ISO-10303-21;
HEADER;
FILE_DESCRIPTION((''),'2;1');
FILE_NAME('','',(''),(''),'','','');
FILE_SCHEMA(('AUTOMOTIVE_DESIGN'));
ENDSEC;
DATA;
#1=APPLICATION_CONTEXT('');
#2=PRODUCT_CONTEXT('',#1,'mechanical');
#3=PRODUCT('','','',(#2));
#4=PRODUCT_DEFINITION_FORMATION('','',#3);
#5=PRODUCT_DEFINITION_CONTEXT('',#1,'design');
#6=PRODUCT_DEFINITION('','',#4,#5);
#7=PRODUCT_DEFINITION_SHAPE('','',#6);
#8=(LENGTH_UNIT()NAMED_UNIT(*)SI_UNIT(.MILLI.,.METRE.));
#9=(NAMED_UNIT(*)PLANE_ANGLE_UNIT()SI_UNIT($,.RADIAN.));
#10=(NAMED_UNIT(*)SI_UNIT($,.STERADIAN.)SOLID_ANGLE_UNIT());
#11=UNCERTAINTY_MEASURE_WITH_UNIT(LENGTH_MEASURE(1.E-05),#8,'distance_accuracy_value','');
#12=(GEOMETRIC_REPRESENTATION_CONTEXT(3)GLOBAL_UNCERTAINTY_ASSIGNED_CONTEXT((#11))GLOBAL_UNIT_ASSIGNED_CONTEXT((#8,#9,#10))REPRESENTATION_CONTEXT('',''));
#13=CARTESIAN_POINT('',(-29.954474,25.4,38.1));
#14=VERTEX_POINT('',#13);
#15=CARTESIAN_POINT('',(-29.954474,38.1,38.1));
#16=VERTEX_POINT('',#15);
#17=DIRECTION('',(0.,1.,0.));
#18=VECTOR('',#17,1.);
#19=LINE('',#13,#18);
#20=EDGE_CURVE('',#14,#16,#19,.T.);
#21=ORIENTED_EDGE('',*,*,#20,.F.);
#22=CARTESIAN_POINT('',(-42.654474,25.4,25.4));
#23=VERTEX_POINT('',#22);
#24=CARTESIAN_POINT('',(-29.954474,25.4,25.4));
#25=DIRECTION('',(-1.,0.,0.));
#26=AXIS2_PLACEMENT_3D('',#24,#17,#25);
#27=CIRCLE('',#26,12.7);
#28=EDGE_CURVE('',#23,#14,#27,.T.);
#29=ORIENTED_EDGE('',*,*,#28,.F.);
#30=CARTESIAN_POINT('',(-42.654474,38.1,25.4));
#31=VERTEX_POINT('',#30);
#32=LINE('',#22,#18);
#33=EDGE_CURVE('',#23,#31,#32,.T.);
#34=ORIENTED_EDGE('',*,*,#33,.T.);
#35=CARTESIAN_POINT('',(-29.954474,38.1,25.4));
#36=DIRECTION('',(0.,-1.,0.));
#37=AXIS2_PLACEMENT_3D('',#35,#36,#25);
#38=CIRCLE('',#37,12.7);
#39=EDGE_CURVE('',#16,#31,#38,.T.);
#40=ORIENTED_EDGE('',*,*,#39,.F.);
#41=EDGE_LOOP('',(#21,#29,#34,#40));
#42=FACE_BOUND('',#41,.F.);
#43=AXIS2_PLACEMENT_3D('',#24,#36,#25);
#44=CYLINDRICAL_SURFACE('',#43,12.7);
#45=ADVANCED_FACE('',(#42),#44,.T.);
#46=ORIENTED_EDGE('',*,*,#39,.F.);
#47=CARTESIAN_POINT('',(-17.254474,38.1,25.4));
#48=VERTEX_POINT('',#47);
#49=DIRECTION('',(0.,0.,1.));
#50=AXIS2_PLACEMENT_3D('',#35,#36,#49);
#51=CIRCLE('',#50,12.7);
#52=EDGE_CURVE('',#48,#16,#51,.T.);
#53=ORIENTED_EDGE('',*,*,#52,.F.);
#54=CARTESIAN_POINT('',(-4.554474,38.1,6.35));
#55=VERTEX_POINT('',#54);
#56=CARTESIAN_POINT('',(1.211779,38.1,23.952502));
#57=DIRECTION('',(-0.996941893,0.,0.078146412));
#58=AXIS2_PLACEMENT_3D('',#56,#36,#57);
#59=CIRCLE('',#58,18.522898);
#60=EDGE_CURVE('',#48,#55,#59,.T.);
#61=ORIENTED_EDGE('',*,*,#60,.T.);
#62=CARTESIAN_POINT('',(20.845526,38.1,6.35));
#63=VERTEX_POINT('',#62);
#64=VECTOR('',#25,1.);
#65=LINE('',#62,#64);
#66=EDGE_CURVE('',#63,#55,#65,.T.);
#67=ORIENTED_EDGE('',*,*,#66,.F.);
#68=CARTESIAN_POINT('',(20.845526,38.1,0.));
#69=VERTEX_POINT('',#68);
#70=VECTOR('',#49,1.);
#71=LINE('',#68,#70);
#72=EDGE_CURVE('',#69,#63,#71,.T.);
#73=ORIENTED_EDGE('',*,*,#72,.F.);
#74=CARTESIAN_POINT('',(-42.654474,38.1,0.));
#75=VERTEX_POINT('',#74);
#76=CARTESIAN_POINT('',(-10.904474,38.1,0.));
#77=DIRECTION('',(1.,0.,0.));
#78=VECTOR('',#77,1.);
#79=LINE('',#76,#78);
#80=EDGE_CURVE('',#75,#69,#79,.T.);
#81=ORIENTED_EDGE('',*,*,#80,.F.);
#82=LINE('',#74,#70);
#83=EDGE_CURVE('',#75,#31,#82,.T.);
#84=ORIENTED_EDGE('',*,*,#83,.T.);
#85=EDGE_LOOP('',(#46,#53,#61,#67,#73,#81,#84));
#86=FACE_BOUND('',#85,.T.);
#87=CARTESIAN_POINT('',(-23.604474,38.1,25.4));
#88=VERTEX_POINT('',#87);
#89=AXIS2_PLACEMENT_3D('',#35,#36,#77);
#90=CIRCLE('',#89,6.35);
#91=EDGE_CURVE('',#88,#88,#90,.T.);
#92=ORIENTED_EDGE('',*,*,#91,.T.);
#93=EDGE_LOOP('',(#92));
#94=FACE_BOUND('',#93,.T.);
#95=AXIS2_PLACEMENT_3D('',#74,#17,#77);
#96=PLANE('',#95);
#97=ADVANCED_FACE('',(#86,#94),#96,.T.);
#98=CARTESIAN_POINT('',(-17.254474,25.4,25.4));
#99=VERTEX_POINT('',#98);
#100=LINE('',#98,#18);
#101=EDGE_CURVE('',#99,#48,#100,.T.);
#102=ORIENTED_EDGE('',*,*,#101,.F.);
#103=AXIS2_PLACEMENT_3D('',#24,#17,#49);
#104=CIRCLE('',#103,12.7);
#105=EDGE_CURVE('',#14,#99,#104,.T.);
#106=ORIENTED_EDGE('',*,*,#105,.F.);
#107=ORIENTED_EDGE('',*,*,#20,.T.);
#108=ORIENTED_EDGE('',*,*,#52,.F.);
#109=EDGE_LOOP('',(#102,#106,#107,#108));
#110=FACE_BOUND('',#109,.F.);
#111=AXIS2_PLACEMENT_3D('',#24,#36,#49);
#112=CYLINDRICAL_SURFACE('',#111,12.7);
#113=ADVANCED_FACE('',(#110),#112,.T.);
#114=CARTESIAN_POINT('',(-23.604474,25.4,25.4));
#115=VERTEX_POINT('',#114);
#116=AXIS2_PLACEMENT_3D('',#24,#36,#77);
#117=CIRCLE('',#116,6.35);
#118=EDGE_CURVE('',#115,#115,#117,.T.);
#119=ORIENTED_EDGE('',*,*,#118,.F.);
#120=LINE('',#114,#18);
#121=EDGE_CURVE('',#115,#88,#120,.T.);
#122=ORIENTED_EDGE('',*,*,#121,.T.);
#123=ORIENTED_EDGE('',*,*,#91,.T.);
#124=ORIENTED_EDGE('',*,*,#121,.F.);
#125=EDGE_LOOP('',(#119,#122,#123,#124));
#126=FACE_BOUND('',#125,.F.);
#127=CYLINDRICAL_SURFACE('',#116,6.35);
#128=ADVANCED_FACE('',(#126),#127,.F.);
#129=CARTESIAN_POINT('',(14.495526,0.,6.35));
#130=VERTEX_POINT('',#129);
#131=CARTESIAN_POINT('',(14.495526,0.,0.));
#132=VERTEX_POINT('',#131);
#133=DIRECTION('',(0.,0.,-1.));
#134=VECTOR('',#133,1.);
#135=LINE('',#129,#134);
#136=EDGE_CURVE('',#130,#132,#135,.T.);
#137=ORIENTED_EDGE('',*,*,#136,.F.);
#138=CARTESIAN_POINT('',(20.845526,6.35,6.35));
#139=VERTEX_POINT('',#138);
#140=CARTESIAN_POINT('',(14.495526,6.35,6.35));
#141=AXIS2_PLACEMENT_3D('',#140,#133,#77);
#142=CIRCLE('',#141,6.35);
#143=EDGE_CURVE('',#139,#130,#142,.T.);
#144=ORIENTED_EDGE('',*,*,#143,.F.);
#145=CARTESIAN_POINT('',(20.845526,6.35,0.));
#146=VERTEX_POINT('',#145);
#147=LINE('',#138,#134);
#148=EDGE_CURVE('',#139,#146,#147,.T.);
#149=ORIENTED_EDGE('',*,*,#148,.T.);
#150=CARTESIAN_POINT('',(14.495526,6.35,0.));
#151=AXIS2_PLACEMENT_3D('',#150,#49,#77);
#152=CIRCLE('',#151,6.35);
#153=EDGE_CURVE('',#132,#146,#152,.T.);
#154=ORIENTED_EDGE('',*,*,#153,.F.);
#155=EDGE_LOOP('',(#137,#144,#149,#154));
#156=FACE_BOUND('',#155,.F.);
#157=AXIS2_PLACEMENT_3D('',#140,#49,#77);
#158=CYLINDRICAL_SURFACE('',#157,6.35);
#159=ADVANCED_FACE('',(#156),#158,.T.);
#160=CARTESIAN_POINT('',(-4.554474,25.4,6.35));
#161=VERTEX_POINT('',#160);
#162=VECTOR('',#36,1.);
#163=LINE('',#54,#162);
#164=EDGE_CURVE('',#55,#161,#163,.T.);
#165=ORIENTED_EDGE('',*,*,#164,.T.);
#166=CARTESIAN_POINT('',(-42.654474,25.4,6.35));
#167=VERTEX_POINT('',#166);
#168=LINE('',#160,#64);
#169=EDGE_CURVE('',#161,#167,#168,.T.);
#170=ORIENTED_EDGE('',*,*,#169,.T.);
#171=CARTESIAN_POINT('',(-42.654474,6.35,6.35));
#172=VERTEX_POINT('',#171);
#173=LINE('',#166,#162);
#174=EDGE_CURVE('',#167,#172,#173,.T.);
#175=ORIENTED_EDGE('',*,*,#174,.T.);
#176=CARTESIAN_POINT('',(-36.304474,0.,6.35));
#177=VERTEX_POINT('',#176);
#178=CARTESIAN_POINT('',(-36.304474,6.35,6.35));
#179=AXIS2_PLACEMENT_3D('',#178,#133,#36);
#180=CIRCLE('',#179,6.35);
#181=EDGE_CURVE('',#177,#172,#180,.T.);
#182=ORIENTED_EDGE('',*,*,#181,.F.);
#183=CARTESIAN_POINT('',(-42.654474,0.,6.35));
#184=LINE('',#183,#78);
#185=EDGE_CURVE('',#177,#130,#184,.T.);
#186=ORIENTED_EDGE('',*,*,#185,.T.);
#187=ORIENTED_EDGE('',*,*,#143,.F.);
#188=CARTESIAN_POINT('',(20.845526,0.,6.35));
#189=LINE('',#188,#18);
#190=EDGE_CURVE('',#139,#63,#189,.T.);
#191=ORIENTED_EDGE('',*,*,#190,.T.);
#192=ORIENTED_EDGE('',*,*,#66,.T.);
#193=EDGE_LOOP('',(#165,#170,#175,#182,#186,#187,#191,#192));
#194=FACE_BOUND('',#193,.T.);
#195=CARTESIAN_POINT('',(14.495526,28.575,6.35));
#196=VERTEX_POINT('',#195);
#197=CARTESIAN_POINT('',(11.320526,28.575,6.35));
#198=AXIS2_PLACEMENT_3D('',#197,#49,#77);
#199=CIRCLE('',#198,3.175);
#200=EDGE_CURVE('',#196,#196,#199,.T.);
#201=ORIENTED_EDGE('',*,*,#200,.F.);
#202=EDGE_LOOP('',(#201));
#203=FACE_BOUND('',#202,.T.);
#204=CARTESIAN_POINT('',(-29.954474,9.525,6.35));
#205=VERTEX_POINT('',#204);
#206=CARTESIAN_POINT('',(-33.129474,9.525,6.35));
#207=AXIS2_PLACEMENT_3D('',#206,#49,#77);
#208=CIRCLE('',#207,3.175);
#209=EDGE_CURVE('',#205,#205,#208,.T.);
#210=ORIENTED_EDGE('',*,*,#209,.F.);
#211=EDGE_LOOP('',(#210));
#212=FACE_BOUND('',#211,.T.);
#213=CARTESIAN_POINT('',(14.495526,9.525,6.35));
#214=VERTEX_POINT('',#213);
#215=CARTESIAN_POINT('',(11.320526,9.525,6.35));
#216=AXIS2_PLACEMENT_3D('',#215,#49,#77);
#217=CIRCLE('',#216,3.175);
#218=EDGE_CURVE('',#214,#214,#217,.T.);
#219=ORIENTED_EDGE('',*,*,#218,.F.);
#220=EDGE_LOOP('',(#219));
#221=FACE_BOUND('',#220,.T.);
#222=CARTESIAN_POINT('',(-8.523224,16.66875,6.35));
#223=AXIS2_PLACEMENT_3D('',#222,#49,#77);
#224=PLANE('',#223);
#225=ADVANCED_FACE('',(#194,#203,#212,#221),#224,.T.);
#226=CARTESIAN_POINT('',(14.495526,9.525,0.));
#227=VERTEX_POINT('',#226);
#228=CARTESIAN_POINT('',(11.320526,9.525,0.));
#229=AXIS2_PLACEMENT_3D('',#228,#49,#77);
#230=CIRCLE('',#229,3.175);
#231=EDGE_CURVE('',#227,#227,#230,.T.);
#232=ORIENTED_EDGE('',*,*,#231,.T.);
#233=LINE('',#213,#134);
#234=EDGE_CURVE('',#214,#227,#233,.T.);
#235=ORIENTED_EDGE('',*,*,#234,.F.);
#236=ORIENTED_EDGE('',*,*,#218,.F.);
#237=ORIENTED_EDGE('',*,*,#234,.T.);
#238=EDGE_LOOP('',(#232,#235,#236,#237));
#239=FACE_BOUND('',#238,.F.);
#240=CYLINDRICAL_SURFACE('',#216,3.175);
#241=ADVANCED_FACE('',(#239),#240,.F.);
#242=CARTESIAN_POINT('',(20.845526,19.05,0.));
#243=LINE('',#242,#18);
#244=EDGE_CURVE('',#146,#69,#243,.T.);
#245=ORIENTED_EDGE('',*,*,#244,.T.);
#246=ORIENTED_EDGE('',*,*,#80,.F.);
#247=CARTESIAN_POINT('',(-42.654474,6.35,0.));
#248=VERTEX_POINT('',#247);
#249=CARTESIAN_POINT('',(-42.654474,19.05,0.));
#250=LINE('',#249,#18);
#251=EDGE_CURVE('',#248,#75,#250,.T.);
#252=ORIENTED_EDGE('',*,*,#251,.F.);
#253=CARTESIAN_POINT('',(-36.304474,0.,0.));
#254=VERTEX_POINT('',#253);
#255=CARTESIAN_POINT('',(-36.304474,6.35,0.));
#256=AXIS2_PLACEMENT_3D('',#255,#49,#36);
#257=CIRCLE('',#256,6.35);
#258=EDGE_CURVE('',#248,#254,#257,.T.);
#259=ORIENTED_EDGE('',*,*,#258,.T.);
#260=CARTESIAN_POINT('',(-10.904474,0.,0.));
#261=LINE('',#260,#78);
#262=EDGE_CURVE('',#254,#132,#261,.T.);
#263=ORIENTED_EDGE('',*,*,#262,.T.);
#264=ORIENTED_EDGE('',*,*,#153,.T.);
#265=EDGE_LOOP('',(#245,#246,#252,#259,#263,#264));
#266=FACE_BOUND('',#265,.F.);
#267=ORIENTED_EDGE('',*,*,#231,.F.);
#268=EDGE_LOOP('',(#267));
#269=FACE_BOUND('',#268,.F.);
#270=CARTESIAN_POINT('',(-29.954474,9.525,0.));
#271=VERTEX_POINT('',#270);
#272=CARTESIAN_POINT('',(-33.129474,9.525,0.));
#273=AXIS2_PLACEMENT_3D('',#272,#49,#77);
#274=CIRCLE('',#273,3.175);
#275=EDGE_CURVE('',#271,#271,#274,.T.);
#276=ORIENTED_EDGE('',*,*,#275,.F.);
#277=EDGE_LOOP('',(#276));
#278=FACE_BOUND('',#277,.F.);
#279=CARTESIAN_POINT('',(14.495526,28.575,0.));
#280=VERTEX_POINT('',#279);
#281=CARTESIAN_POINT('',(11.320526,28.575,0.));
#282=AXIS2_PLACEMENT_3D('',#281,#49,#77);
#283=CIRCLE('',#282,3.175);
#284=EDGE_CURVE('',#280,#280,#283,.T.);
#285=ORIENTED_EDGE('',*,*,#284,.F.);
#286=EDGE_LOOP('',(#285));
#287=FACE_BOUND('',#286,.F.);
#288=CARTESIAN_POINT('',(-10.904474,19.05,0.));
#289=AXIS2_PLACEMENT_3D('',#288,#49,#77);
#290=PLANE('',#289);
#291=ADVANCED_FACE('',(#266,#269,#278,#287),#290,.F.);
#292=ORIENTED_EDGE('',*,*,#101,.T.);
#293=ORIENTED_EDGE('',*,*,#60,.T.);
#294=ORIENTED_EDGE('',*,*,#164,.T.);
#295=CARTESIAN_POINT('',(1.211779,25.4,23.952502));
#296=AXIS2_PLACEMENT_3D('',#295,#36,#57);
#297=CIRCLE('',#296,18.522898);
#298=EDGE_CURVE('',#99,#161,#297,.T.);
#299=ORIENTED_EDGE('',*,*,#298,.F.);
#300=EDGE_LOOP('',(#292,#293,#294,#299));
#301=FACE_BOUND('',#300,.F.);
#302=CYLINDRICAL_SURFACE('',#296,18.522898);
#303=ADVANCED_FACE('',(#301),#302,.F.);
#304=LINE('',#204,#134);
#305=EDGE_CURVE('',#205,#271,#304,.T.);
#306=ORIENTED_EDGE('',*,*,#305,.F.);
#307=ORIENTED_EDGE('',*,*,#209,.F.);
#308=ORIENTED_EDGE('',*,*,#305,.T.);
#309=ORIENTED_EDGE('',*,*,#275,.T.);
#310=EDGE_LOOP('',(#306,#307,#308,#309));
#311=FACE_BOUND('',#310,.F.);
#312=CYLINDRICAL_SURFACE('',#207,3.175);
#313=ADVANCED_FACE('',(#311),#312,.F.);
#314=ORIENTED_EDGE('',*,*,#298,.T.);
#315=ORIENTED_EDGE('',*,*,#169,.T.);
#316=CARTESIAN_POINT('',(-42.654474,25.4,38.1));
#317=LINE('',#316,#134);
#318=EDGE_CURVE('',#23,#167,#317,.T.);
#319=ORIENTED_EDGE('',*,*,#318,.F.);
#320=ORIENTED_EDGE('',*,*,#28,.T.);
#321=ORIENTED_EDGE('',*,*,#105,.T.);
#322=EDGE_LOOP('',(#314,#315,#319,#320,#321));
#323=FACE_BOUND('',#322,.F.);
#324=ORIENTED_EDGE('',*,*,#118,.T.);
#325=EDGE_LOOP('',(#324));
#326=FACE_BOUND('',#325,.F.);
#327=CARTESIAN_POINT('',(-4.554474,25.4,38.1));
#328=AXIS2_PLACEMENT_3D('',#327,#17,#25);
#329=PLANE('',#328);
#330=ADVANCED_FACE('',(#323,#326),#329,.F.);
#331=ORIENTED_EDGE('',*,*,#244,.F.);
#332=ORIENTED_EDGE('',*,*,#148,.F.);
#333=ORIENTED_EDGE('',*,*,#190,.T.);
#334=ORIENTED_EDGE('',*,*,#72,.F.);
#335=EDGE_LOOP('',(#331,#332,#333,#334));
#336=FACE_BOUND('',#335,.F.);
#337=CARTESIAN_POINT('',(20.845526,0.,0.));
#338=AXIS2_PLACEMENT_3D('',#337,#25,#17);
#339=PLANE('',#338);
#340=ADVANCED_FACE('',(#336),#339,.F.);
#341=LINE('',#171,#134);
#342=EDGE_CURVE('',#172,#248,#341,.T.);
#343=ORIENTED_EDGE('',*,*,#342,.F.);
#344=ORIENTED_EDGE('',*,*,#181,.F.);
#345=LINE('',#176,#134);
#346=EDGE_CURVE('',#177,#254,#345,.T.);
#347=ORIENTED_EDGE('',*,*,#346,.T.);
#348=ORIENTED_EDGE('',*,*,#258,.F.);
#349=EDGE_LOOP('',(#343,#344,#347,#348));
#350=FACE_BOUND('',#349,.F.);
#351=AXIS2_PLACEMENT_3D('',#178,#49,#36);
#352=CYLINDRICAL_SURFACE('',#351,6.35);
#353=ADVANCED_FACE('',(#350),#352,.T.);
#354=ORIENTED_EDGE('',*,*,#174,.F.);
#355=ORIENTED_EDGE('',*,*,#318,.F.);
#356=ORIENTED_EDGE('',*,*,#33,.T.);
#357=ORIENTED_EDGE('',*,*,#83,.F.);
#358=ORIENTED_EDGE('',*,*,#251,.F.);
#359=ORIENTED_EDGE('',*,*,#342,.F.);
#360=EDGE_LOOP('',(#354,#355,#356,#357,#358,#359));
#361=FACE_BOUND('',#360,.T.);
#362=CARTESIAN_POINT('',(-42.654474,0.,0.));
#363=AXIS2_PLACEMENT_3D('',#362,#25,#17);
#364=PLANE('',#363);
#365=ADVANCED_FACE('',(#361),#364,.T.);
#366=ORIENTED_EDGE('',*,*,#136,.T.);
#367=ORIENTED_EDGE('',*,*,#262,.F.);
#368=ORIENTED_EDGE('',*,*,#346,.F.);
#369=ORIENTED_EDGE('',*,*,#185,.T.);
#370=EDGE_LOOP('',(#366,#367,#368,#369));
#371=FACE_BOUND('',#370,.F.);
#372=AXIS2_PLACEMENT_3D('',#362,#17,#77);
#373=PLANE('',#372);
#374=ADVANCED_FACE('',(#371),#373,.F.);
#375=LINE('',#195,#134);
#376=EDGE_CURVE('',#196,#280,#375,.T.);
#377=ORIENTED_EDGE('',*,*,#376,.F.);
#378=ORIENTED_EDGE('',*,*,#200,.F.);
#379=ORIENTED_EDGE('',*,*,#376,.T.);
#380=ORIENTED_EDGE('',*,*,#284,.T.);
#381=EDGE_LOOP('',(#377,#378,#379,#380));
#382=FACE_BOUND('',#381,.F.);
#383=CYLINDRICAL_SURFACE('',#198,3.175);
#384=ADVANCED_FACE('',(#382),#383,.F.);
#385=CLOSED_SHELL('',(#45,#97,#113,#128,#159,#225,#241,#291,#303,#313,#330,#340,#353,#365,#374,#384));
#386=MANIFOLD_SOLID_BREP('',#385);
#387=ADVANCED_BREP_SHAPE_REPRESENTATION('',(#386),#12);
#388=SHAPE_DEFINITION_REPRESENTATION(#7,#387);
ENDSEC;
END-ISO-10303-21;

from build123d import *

# Parameters (mm, degrees)
F0_W      = 63.5
F0_H      = 38.1
F1_DEPTH  = 38.1
F3_DEPTH  = 31.75
F4_R      = 6.35
F5_DEPTH  = 44.45
F6_R      = 3.175
F7_DEPTH  = 25.4
F9_DEPTH  = 25.4
F11_DEPTH = 25.4


# Not quite as in the source:
# - a length typed as a fraction of an inch, garbled in the dataset ("3 / 203.2 mm" for 3/8 in), is restored


with BuildPart() as f1:
    # F0 (on Top) → F1 (new body)
    with BuildSketch(Plane.XY):
        with Locations((-10.9044740348, 19.05)):
            Rectangle(F0_W, F0_H)
    extrude(amount=F1_DEPTH)

    # F2 (on face) → F3 (cut)
    with BuildSketch(Plane.XY.offset(38.1)):
        Polygon((-4.5544740348, 25.4), (-42.6544740348, 25.4), (-42.6544740348, 0), (20.8455259652, 0), (20.8455259652, 38.1), (-4.5544740348, 38.1), align=None)
    extrude(amount=-F3_DEPTH, mode=Mode.SUBTRACT)

    # F4 (on face) → F5 (cut)
    with BuildSketch(Plane.XZ.offset(-25.4)):
        with Locations((-29.9544740348, 25.4)):
            Circle(F4_R)
        with BuildLine():
            ThreePointArc((-42.6544740348, 25.4), (-38.9347301559, 34.3802561211), (-29.9544740348, 38.1))
            Line((-29.9544740348, 38.1), (-42.6544740348, 38.1))
            Line((-42.6544740348, 38.1), (-42.6544740348, 25.4))
        make_face()
        with BuildLine():
            ThreePointArc((-29.9544740348, 38.1), (-20.9742179137, 34.3802561211), (-17.2544740348, 25.4))
            ThreePointArc((-17.2544740348, 25.4), (-14.2002037714, 13.6778468423), (-4.5544740348, 6.35))
            Line((-4.5544740348, 6.35), (-4.5544740348, 38.1))
            Line((-4.5544740348, 38.1), (-29.9544740348, 38.1))
        make_face()
    extrude(amount=-F5_DEPTH, mode=Mode.SUBTRACT)

    # F6 (on face) → F7 (cut)
    with BuildSketch(Plane.XY.offset(6.35)):
        with Locations((11.3205259652, 9.525)):
            Circle(F6_R)
        with Locations((-33.1294740348, 9.525)):
            Circle(F6_R)
        with Locations((11.3205259652, 28.575)):
            Circle(F6_R)
    extrude(amount=-F7_DEPTH, mode=Mode.SUBTRACT)

    # F8 (on face) → F9 (cut)
    with BuildSketch(Plane.XY.offset(6.35)):
        with BuildLine():
            ThreePointArc((-36.3044740348, 0), (-40.7946020953, 1.8598719395), (-42.6544740348, 6.35))
            Line((-42.6544740348, 6.35), (-42.6544740348, 0))
            Line((-42.6544740348, 0), (-36.3044740348, 0))
        make_face()
    extrude(amount=-F9_DEPTH, mode=Mode.SUBTRACT)

    # F10 (on face) → F11 (cut)
    with BuildSketch(Plane.XY.offset(6.35)):
        with BuildLine():
            Line((20.8455259652, 0), (20.8455259652, 6.35))
            ThreePointArc((20.8455259652, 6.35), (18.9856540257, 1.8598719395), (14.4955259652, 0))
            Line((14.4955259652, 0), (20.8455259652, 0))
        make_face()
    extrude(amount=-F11_DEPTH, mode=Mode.SUBTRACT)


solid = f1.part
